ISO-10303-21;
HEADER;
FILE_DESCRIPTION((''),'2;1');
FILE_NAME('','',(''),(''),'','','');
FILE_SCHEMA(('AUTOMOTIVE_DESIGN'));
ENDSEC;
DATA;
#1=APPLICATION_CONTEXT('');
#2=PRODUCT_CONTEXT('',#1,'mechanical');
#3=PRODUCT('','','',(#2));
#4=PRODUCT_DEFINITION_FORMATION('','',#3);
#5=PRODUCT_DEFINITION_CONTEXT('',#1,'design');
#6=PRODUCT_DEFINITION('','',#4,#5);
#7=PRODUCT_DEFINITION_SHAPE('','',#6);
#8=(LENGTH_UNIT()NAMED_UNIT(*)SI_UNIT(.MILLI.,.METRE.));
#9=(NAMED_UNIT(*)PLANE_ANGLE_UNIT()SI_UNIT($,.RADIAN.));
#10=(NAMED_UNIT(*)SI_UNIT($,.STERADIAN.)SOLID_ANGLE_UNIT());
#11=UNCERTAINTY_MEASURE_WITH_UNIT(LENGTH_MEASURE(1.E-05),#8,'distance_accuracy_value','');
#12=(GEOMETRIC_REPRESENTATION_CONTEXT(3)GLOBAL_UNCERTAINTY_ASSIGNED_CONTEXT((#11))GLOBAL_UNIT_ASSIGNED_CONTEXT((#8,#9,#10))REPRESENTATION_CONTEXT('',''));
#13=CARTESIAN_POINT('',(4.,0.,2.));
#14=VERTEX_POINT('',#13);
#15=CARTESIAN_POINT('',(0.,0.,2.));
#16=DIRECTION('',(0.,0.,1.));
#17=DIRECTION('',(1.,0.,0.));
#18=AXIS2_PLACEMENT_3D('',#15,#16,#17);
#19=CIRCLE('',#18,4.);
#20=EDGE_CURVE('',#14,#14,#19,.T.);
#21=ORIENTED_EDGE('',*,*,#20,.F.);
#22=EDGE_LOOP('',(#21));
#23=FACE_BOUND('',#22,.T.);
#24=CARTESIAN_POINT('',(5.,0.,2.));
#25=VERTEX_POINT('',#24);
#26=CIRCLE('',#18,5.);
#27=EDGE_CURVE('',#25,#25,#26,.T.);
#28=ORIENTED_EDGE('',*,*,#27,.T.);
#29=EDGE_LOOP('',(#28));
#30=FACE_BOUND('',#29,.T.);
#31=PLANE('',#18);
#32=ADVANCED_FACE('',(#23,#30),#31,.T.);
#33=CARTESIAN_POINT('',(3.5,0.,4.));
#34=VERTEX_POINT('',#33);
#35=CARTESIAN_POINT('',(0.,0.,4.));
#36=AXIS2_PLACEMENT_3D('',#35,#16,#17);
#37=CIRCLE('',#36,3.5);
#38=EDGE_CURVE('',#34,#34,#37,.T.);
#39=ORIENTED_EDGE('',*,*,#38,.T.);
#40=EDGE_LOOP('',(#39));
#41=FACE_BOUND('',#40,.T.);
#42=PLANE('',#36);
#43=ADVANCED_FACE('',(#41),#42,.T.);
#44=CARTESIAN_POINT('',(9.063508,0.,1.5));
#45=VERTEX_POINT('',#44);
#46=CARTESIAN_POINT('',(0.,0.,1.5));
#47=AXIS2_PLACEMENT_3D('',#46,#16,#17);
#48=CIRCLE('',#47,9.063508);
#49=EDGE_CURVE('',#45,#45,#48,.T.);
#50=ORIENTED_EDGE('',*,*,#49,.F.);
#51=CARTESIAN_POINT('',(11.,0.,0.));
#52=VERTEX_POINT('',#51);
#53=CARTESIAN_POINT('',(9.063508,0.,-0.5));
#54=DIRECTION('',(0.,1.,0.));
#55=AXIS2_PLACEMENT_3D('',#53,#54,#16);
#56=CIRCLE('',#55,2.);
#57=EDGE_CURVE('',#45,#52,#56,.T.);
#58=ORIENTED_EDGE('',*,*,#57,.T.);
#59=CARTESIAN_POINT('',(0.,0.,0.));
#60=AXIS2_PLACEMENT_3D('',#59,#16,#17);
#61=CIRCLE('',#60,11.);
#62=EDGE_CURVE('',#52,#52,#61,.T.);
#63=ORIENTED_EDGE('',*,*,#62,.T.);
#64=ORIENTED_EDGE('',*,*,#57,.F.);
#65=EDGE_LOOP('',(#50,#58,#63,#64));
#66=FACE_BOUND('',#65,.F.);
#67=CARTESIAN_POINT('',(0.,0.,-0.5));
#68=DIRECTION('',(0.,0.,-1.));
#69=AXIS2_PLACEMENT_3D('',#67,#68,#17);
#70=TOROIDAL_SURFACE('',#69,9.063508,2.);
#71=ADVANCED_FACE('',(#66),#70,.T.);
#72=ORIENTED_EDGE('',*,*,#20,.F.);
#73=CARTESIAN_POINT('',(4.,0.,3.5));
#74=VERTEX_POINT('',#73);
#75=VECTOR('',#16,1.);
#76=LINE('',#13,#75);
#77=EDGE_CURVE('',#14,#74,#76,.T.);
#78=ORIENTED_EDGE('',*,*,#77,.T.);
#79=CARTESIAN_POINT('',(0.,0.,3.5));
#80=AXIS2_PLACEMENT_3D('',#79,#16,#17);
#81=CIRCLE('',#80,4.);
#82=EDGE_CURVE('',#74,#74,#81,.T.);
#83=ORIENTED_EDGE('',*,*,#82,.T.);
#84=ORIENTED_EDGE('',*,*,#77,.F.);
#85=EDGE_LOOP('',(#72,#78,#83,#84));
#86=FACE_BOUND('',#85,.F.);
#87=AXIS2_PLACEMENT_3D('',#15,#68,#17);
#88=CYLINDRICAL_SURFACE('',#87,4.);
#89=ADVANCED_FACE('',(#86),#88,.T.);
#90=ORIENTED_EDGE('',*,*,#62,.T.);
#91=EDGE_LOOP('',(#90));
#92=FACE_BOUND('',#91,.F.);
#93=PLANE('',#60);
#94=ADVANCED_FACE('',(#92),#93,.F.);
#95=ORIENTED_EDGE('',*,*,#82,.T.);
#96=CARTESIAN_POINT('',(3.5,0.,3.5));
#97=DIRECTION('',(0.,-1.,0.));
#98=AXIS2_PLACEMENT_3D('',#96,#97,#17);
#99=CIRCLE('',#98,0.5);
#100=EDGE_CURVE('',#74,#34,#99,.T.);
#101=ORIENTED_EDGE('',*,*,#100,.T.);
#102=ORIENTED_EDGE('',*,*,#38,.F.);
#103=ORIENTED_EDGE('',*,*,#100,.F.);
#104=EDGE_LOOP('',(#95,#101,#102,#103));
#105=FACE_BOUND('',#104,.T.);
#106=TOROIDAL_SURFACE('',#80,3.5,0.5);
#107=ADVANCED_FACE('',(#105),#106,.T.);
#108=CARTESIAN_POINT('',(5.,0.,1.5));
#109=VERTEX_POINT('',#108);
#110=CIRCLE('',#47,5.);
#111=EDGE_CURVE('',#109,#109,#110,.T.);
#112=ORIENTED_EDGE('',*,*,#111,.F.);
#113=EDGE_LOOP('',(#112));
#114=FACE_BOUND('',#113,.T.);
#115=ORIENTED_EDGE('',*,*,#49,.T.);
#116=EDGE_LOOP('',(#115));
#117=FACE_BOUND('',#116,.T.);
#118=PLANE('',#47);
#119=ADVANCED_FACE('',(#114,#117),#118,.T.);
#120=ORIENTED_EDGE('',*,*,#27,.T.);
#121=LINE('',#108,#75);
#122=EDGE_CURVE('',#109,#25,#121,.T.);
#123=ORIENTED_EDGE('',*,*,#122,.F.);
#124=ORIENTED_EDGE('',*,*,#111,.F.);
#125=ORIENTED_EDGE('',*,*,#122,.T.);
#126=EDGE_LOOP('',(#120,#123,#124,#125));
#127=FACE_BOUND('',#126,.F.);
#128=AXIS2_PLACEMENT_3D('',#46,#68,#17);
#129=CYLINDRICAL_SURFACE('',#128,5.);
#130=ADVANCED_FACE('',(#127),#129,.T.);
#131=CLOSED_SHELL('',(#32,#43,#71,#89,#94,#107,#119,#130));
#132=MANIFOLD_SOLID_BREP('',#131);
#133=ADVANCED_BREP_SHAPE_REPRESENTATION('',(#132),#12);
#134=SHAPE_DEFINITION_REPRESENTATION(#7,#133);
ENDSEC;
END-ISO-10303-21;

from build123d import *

# Parameters (mm, degrees)
F0_R     = 11
F1_DEPTH = 1.5
F2_R     = 5
F3_DEPTH = 0.5
F4_R     = 4
F5_DEPTH = 2
F6_R     = 0.5


# Not quite as in the source:
# - a fillet or chamfer that OpenCascade refuses, or shapes differently, is made with other operations: its cross-section is extruded or revolved along the edge and cut away or added


with BuildPart() as f1:
    # F0 (on Top) → F1 (new body)
    with BuildSketch(Plane.XY):
        Circle(F0_R)
    extrude(amount=F1_DEPTH)

    # F2 (on face) → F3 (join)
    with BuildSketch(Plane.XY.offset(1.5)):
        Circle(F2_R)
    extrude(amount=F3_DEPTH)

    # F4 (on face) → F5 (join)
    with BuildSketch(Plane.XY.offset(2)):
        Circle(F4_R)
    extrude(amount=F5_DEPTH)

    # F6
    f6_edges = [f1.edges().sort_by_distance(p)[0] for p in [
        (-4, 0, 4),
    ]]
    fillet(f6_edges, radius=F6_R)

    # F7: fillet of radius 2 on 1 edges, made by hand

    # F7_s1 → F7_t2 (revolve, cut)
    with BuildSketch(Plane.XZ):
        with BuildLine():
            ThreePointArc((9.0635083269, 1.5), (10.2882531983, 1.0811388301), (11, 0))
            Line((11, 0), (11, 1.5))
            Line((11, 1.5), (9.0635083269, 1.5))
        make_face()
    revolve(axis=Axis((0, 0, 1.5), (0, 0, 1)), mode=Mode.SUBTRACT)


solid = f1.part
